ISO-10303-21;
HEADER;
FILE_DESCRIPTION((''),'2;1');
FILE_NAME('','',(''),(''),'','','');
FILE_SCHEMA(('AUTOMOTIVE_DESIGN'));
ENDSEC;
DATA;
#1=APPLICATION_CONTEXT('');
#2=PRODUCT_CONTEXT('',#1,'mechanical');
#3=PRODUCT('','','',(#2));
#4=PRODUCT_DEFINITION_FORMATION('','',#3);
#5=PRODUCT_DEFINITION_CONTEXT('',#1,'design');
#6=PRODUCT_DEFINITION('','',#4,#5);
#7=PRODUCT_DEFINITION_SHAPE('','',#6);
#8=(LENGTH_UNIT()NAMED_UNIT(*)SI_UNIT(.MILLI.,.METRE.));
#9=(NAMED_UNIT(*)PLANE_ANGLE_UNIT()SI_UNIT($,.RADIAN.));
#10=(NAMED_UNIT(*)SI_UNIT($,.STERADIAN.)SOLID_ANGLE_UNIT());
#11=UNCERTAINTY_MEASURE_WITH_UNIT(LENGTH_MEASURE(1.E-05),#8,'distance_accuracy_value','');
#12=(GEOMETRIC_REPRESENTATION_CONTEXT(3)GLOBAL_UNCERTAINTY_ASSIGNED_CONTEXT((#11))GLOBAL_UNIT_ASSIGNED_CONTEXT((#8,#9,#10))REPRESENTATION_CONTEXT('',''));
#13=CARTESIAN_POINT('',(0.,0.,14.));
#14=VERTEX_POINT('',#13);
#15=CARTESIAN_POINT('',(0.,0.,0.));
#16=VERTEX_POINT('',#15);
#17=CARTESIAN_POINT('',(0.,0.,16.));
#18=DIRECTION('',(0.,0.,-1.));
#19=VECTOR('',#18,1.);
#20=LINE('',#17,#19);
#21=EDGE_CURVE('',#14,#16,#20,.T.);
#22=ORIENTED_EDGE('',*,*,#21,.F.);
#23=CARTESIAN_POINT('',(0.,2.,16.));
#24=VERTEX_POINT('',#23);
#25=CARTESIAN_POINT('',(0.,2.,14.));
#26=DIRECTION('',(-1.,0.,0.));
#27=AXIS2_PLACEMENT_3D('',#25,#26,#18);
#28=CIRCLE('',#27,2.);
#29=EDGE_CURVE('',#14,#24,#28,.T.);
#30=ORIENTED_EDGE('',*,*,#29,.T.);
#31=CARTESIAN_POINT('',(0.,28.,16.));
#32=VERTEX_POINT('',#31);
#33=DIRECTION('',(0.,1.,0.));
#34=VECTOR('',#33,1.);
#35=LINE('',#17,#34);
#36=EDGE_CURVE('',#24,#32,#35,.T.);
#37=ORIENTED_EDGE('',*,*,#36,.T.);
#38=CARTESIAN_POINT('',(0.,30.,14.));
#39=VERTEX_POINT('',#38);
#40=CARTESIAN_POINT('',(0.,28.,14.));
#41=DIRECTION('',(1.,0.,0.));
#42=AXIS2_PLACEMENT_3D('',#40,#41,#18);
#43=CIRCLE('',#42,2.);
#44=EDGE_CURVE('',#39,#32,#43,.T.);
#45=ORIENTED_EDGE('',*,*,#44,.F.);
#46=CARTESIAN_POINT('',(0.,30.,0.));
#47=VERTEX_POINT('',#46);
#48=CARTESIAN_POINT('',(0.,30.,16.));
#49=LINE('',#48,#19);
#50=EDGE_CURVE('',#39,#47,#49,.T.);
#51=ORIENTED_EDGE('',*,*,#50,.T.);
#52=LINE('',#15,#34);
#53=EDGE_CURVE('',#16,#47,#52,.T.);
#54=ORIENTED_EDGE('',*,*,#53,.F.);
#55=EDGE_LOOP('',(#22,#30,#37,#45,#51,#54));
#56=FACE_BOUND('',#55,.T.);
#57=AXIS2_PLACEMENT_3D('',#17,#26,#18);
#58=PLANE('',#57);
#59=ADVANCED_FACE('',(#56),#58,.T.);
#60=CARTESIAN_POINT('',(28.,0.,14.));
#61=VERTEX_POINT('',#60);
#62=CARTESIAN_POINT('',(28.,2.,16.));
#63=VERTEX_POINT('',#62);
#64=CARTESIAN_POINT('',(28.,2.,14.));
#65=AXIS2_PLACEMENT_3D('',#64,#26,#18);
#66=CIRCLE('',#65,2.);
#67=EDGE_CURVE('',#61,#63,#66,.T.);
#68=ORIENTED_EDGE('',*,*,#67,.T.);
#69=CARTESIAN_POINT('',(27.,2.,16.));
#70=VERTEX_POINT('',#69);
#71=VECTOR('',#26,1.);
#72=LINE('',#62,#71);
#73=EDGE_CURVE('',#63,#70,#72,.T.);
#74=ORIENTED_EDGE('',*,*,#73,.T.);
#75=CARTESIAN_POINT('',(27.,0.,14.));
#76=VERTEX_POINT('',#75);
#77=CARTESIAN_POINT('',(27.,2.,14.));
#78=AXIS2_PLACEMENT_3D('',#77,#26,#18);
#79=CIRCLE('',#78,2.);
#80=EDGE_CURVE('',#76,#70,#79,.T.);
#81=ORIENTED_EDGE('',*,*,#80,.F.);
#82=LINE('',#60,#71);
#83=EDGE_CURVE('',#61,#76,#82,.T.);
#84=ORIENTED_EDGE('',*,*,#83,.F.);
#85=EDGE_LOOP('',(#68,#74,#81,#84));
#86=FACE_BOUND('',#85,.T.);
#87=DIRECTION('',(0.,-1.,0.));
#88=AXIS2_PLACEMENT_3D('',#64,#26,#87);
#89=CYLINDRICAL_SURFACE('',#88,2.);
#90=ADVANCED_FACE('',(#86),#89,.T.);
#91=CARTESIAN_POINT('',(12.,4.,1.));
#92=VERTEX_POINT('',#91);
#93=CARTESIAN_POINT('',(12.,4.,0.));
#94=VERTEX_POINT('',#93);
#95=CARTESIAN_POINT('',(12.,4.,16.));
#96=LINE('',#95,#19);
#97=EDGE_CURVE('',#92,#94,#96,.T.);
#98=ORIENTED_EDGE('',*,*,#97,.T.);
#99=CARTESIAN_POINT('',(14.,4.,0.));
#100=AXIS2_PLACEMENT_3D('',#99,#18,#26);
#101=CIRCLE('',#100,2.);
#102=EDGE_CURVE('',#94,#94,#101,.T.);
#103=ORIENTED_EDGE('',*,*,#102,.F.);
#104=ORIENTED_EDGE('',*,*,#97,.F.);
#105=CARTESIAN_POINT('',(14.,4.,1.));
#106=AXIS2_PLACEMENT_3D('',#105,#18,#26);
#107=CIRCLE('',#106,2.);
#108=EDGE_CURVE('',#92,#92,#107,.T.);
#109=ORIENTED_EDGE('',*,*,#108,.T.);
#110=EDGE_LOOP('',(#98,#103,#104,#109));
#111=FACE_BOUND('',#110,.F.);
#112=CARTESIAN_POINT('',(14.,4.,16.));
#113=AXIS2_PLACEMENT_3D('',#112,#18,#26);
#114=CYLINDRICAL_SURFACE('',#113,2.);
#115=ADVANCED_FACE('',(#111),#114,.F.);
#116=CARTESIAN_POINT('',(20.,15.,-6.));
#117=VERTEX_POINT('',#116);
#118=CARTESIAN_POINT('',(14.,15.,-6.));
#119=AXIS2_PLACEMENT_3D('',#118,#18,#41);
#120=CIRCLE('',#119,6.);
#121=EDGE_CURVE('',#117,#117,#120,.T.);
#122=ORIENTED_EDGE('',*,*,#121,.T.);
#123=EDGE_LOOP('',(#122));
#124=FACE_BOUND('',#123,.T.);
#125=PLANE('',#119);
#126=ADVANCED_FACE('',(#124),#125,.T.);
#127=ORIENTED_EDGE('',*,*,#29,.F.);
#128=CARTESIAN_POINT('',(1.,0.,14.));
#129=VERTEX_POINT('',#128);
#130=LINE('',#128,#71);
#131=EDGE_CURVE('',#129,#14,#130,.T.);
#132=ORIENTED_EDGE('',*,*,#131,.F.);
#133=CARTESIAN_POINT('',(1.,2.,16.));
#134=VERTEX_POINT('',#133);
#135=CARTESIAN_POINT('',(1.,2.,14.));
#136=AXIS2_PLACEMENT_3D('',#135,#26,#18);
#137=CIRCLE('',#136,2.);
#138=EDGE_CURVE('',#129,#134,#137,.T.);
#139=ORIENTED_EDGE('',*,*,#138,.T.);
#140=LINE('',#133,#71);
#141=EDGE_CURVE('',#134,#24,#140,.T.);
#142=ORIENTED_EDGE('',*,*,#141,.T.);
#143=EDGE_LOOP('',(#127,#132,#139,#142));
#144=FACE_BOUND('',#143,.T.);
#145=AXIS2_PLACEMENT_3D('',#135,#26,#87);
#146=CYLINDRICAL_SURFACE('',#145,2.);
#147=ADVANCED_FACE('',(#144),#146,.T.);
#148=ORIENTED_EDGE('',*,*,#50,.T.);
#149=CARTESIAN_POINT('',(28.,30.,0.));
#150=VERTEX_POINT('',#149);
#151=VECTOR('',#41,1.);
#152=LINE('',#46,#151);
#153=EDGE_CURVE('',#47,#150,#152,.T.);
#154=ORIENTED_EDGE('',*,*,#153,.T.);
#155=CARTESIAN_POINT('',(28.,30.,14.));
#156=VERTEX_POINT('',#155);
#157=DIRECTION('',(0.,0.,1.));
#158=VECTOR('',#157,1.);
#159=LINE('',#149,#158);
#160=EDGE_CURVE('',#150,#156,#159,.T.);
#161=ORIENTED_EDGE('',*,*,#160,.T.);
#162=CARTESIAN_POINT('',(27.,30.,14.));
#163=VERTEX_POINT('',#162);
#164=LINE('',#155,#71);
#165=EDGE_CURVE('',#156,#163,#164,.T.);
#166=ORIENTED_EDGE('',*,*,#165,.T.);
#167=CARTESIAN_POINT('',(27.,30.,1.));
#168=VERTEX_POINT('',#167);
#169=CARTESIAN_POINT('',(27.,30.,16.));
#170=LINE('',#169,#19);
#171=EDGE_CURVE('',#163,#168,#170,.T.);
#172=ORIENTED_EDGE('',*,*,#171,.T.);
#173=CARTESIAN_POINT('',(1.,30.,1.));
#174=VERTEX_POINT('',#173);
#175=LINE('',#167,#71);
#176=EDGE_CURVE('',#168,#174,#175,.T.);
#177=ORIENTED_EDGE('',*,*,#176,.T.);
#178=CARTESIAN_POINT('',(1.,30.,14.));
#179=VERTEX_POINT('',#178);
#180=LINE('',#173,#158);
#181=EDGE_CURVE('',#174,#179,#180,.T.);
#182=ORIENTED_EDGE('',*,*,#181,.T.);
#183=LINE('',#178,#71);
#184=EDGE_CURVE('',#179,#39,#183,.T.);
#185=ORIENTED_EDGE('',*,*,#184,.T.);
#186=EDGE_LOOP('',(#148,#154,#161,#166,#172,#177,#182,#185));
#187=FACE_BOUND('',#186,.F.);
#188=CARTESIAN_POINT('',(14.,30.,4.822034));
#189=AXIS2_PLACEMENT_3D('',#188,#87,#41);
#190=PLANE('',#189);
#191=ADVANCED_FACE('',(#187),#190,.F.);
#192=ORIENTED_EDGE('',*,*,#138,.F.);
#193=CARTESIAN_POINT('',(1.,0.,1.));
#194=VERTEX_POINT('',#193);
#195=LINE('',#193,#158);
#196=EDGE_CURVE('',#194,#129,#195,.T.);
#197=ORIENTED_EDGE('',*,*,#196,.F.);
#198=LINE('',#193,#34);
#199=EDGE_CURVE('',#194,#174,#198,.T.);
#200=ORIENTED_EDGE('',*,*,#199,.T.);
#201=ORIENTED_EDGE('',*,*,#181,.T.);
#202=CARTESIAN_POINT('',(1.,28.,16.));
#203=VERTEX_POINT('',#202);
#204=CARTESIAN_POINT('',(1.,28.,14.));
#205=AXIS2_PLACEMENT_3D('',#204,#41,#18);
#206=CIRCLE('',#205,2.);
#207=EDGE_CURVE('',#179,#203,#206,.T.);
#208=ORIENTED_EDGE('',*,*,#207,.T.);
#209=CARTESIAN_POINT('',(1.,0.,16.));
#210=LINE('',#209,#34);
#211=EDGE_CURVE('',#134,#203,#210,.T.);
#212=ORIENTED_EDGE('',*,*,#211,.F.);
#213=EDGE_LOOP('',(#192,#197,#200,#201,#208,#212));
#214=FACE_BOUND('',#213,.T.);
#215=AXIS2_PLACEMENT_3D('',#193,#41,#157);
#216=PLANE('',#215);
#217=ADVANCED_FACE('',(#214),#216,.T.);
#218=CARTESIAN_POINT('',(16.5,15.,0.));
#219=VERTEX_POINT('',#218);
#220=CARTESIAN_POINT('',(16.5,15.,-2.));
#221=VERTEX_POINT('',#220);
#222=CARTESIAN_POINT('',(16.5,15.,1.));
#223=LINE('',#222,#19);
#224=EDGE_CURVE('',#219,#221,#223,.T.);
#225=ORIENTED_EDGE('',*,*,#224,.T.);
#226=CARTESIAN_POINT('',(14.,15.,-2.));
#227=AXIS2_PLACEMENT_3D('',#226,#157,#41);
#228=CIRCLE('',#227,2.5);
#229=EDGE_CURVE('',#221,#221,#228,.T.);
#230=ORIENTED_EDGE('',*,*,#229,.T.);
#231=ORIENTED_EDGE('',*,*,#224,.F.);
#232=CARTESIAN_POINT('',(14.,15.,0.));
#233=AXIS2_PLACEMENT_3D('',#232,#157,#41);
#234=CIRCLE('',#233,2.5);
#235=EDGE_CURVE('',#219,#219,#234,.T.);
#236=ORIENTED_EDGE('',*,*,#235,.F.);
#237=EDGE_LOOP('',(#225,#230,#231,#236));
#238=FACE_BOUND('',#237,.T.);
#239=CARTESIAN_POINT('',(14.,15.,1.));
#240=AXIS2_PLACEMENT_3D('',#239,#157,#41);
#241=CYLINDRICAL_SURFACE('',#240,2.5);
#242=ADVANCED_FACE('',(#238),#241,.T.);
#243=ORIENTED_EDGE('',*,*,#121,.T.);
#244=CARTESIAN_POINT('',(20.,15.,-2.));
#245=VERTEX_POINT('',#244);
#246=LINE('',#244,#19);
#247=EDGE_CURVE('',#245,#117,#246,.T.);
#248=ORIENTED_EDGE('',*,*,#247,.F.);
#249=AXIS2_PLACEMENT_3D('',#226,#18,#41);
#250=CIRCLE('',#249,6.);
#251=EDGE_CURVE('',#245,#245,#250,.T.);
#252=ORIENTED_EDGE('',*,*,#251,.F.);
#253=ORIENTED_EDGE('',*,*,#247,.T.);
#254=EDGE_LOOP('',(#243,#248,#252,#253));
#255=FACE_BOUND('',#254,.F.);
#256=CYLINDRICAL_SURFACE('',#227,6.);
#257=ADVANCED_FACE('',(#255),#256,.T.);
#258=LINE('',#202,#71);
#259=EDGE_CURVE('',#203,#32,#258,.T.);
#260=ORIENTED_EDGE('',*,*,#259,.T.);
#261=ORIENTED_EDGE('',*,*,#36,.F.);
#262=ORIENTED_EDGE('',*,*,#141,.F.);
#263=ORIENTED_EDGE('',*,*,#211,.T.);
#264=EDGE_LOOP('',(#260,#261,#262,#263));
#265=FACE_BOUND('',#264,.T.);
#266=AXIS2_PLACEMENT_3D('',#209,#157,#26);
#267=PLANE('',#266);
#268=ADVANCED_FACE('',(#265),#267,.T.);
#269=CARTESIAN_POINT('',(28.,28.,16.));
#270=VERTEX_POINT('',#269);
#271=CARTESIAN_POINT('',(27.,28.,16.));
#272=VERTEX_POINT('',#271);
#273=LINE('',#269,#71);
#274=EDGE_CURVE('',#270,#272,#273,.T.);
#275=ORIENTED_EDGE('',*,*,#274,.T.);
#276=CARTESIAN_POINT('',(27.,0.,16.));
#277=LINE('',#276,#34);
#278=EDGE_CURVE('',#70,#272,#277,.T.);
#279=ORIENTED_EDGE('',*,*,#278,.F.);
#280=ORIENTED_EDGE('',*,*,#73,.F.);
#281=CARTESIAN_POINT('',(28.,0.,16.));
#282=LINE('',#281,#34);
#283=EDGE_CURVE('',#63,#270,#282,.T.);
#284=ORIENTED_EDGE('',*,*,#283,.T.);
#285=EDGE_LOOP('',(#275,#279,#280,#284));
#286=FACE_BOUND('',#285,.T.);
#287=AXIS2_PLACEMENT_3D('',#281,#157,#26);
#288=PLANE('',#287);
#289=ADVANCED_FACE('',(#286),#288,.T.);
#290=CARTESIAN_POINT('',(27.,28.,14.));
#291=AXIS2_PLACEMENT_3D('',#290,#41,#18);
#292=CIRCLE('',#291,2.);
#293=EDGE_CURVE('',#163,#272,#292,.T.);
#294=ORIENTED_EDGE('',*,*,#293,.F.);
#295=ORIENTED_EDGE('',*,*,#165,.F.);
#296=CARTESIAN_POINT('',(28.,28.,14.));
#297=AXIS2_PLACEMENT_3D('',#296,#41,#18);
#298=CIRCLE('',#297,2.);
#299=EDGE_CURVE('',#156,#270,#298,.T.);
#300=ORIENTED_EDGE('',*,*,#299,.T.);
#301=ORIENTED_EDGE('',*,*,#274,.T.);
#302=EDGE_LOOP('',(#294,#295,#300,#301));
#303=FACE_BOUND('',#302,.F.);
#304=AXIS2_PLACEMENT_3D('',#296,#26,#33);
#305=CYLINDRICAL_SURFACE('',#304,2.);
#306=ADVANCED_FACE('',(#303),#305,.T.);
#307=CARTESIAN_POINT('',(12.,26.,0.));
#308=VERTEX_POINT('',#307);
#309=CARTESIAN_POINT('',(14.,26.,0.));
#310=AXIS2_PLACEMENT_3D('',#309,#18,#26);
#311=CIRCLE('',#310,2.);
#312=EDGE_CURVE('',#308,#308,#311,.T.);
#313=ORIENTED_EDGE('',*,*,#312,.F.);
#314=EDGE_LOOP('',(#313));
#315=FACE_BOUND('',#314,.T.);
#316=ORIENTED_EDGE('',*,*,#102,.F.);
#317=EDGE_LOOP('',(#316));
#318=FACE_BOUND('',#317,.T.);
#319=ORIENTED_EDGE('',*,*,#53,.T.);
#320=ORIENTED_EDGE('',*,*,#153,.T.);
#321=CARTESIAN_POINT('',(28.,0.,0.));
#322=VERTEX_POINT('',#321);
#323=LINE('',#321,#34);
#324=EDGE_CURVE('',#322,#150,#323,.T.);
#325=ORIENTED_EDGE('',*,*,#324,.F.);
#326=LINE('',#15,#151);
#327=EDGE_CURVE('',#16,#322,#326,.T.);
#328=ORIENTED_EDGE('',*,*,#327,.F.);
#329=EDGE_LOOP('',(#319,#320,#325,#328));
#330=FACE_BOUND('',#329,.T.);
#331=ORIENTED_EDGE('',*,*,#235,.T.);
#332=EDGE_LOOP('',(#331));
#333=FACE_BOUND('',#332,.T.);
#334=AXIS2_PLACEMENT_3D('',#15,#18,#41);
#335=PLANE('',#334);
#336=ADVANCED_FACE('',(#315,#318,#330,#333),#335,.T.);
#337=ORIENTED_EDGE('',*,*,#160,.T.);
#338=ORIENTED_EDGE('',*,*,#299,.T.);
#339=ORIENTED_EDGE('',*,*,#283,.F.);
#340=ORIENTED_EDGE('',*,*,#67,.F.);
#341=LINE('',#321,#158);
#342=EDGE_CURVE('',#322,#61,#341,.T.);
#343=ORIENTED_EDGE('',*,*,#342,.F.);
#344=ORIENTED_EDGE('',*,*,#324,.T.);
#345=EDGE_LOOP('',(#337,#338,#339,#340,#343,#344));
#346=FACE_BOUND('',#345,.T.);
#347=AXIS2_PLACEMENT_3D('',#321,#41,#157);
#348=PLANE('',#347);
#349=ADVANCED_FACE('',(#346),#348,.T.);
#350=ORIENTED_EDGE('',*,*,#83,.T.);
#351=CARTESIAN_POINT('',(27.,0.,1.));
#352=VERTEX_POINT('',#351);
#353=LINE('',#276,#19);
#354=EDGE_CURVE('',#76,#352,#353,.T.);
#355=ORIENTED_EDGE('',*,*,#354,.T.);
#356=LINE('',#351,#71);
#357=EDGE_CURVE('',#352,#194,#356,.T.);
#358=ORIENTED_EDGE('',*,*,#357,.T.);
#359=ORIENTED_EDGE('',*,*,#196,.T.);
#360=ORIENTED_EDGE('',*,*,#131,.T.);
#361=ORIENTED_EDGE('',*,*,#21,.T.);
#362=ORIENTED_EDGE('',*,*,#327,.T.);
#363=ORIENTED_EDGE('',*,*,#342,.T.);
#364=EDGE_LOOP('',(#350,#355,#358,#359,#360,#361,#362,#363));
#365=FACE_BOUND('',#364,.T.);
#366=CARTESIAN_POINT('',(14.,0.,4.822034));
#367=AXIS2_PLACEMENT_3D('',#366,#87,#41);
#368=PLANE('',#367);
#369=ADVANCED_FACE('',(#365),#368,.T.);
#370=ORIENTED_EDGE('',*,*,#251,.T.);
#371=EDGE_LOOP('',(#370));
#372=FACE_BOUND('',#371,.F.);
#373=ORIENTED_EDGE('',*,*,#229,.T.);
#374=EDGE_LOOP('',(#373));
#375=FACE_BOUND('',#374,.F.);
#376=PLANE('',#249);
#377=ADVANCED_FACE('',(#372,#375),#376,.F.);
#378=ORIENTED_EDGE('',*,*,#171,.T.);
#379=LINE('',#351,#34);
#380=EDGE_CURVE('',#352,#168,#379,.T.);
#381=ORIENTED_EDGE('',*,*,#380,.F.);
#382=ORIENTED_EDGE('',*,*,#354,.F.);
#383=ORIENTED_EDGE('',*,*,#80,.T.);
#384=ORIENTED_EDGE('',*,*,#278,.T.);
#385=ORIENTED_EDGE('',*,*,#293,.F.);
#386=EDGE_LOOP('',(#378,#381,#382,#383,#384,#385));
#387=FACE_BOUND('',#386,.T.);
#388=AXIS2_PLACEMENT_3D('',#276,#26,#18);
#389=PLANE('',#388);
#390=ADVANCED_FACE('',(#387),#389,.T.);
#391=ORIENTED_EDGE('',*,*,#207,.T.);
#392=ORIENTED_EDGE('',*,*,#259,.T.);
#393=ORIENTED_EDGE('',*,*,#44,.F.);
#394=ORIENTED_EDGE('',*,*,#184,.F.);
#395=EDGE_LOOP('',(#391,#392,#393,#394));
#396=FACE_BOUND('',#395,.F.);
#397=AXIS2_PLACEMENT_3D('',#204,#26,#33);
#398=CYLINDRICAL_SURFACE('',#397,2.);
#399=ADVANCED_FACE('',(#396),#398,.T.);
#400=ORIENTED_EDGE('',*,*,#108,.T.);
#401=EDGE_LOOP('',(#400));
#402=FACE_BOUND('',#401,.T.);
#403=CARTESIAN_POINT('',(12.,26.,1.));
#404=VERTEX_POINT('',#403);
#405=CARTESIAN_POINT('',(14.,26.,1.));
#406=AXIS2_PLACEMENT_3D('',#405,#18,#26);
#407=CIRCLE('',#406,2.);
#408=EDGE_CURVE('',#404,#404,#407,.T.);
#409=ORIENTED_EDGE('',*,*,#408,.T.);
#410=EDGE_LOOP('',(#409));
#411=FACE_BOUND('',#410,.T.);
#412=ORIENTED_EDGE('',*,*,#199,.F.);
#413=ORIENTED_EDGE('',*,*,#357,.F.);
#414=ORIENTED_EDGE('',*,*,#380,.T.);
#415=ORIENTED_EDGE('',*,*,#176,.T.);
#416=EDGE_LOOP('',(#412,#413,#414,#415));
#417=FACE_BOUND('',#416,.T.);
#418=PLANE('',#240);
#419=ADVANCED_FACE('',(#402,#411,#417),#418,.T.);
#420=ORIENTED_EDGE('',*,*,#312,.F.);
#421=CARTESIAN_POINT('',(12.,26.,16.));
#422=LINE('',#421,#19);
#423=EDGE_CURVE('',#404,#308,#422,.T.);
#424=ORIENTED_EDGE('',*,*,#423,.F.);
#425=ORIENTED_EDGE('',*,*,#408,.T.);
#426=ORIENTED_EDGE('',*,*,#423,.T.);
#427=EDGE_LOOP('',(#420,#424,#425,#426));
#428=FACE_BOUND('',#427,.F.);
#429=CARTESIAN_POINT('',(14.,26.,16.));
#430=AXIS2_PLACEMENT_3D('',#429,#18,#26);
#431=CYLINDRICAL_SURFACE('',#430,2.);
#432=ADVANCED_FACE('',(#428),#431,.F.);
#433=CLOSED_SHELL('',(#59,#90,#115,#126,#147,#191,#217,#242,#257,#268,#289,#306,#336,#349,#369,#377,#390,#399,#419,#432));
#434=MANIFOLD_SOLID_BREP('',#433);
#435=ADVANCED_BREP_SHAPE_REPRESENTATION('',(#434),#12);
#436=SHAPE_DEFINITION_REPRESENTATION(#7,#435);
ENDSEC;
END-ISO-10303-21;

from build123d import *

# Parameters (mm, degrees)
F1_DEPTH = 30
F2_R     = 2.5
F3_DEPTH = 3
F4_R     = 6
F4_R_2   = 2.5
F5_DEPTH = 4
F6_R     = 2
F7_D     = 4
F7_DEPTH = 15
F7_TIP   = 1.2017212381


with BuildPart() as f1:
    # F0 (on Front) → F1 (new body)
    with BuildSketch(Plane.XZ):
        Polygon((0, 1), (0, 0), (28, 0), (28, 1), (28, 16), (27, 16), (27, 1), (1, 1), (1, 16), (0, 16), align=None)
    extrude(amount=-F1_DEPTH)

    # F2 (on face) → F3 (join)
    with BuildSketch(Plane.XY.offset(1)):
        with Locations((14, 15)):
            Circle(F2_R)
    extrude(amount=-F3_DEPTH)

    # F4 (on face) → F5 (join)
    with BuildSketch(Plane(origin=(0, 0, -2), x_dir=(1, 0, 0), z_dir=(0, 0, -1))):
        with Locations((14, -15)):
            Circle(F4_R)
        with Locations((14, -15)):
            Circle(F4_R_2, mode=Mode.SUBTRACT)
        with Locations((14, -15)):
            Circle(F4_R_2)
    extrude(amount=F5_DEPTH)

    # F6
    f6_edges = [f1.edges().sort_by_distance(p)[0] for p in [
        (27.5, 0, 16),
        (27.5, 30, 16),
        (0.5, 30, 16),
        (0.5, 0, 16),
    ]]
    fillet(f6_edges, radius=F6_R)

    # F7
    with Locations(Plane.XY.offset(1)):
        with Locations((14, 4), (14, 26)):
            Hole(F7_D / 2, depth=F7_DEPTH)
            with Locations((0, 0, -(F7_DEPTH + F7_TIP / 2))):  # 118° drill point
                Cone(0, F7_D / 2, F7_TIP, mode=Mode.SUBTRACT)


solid = f1.part
